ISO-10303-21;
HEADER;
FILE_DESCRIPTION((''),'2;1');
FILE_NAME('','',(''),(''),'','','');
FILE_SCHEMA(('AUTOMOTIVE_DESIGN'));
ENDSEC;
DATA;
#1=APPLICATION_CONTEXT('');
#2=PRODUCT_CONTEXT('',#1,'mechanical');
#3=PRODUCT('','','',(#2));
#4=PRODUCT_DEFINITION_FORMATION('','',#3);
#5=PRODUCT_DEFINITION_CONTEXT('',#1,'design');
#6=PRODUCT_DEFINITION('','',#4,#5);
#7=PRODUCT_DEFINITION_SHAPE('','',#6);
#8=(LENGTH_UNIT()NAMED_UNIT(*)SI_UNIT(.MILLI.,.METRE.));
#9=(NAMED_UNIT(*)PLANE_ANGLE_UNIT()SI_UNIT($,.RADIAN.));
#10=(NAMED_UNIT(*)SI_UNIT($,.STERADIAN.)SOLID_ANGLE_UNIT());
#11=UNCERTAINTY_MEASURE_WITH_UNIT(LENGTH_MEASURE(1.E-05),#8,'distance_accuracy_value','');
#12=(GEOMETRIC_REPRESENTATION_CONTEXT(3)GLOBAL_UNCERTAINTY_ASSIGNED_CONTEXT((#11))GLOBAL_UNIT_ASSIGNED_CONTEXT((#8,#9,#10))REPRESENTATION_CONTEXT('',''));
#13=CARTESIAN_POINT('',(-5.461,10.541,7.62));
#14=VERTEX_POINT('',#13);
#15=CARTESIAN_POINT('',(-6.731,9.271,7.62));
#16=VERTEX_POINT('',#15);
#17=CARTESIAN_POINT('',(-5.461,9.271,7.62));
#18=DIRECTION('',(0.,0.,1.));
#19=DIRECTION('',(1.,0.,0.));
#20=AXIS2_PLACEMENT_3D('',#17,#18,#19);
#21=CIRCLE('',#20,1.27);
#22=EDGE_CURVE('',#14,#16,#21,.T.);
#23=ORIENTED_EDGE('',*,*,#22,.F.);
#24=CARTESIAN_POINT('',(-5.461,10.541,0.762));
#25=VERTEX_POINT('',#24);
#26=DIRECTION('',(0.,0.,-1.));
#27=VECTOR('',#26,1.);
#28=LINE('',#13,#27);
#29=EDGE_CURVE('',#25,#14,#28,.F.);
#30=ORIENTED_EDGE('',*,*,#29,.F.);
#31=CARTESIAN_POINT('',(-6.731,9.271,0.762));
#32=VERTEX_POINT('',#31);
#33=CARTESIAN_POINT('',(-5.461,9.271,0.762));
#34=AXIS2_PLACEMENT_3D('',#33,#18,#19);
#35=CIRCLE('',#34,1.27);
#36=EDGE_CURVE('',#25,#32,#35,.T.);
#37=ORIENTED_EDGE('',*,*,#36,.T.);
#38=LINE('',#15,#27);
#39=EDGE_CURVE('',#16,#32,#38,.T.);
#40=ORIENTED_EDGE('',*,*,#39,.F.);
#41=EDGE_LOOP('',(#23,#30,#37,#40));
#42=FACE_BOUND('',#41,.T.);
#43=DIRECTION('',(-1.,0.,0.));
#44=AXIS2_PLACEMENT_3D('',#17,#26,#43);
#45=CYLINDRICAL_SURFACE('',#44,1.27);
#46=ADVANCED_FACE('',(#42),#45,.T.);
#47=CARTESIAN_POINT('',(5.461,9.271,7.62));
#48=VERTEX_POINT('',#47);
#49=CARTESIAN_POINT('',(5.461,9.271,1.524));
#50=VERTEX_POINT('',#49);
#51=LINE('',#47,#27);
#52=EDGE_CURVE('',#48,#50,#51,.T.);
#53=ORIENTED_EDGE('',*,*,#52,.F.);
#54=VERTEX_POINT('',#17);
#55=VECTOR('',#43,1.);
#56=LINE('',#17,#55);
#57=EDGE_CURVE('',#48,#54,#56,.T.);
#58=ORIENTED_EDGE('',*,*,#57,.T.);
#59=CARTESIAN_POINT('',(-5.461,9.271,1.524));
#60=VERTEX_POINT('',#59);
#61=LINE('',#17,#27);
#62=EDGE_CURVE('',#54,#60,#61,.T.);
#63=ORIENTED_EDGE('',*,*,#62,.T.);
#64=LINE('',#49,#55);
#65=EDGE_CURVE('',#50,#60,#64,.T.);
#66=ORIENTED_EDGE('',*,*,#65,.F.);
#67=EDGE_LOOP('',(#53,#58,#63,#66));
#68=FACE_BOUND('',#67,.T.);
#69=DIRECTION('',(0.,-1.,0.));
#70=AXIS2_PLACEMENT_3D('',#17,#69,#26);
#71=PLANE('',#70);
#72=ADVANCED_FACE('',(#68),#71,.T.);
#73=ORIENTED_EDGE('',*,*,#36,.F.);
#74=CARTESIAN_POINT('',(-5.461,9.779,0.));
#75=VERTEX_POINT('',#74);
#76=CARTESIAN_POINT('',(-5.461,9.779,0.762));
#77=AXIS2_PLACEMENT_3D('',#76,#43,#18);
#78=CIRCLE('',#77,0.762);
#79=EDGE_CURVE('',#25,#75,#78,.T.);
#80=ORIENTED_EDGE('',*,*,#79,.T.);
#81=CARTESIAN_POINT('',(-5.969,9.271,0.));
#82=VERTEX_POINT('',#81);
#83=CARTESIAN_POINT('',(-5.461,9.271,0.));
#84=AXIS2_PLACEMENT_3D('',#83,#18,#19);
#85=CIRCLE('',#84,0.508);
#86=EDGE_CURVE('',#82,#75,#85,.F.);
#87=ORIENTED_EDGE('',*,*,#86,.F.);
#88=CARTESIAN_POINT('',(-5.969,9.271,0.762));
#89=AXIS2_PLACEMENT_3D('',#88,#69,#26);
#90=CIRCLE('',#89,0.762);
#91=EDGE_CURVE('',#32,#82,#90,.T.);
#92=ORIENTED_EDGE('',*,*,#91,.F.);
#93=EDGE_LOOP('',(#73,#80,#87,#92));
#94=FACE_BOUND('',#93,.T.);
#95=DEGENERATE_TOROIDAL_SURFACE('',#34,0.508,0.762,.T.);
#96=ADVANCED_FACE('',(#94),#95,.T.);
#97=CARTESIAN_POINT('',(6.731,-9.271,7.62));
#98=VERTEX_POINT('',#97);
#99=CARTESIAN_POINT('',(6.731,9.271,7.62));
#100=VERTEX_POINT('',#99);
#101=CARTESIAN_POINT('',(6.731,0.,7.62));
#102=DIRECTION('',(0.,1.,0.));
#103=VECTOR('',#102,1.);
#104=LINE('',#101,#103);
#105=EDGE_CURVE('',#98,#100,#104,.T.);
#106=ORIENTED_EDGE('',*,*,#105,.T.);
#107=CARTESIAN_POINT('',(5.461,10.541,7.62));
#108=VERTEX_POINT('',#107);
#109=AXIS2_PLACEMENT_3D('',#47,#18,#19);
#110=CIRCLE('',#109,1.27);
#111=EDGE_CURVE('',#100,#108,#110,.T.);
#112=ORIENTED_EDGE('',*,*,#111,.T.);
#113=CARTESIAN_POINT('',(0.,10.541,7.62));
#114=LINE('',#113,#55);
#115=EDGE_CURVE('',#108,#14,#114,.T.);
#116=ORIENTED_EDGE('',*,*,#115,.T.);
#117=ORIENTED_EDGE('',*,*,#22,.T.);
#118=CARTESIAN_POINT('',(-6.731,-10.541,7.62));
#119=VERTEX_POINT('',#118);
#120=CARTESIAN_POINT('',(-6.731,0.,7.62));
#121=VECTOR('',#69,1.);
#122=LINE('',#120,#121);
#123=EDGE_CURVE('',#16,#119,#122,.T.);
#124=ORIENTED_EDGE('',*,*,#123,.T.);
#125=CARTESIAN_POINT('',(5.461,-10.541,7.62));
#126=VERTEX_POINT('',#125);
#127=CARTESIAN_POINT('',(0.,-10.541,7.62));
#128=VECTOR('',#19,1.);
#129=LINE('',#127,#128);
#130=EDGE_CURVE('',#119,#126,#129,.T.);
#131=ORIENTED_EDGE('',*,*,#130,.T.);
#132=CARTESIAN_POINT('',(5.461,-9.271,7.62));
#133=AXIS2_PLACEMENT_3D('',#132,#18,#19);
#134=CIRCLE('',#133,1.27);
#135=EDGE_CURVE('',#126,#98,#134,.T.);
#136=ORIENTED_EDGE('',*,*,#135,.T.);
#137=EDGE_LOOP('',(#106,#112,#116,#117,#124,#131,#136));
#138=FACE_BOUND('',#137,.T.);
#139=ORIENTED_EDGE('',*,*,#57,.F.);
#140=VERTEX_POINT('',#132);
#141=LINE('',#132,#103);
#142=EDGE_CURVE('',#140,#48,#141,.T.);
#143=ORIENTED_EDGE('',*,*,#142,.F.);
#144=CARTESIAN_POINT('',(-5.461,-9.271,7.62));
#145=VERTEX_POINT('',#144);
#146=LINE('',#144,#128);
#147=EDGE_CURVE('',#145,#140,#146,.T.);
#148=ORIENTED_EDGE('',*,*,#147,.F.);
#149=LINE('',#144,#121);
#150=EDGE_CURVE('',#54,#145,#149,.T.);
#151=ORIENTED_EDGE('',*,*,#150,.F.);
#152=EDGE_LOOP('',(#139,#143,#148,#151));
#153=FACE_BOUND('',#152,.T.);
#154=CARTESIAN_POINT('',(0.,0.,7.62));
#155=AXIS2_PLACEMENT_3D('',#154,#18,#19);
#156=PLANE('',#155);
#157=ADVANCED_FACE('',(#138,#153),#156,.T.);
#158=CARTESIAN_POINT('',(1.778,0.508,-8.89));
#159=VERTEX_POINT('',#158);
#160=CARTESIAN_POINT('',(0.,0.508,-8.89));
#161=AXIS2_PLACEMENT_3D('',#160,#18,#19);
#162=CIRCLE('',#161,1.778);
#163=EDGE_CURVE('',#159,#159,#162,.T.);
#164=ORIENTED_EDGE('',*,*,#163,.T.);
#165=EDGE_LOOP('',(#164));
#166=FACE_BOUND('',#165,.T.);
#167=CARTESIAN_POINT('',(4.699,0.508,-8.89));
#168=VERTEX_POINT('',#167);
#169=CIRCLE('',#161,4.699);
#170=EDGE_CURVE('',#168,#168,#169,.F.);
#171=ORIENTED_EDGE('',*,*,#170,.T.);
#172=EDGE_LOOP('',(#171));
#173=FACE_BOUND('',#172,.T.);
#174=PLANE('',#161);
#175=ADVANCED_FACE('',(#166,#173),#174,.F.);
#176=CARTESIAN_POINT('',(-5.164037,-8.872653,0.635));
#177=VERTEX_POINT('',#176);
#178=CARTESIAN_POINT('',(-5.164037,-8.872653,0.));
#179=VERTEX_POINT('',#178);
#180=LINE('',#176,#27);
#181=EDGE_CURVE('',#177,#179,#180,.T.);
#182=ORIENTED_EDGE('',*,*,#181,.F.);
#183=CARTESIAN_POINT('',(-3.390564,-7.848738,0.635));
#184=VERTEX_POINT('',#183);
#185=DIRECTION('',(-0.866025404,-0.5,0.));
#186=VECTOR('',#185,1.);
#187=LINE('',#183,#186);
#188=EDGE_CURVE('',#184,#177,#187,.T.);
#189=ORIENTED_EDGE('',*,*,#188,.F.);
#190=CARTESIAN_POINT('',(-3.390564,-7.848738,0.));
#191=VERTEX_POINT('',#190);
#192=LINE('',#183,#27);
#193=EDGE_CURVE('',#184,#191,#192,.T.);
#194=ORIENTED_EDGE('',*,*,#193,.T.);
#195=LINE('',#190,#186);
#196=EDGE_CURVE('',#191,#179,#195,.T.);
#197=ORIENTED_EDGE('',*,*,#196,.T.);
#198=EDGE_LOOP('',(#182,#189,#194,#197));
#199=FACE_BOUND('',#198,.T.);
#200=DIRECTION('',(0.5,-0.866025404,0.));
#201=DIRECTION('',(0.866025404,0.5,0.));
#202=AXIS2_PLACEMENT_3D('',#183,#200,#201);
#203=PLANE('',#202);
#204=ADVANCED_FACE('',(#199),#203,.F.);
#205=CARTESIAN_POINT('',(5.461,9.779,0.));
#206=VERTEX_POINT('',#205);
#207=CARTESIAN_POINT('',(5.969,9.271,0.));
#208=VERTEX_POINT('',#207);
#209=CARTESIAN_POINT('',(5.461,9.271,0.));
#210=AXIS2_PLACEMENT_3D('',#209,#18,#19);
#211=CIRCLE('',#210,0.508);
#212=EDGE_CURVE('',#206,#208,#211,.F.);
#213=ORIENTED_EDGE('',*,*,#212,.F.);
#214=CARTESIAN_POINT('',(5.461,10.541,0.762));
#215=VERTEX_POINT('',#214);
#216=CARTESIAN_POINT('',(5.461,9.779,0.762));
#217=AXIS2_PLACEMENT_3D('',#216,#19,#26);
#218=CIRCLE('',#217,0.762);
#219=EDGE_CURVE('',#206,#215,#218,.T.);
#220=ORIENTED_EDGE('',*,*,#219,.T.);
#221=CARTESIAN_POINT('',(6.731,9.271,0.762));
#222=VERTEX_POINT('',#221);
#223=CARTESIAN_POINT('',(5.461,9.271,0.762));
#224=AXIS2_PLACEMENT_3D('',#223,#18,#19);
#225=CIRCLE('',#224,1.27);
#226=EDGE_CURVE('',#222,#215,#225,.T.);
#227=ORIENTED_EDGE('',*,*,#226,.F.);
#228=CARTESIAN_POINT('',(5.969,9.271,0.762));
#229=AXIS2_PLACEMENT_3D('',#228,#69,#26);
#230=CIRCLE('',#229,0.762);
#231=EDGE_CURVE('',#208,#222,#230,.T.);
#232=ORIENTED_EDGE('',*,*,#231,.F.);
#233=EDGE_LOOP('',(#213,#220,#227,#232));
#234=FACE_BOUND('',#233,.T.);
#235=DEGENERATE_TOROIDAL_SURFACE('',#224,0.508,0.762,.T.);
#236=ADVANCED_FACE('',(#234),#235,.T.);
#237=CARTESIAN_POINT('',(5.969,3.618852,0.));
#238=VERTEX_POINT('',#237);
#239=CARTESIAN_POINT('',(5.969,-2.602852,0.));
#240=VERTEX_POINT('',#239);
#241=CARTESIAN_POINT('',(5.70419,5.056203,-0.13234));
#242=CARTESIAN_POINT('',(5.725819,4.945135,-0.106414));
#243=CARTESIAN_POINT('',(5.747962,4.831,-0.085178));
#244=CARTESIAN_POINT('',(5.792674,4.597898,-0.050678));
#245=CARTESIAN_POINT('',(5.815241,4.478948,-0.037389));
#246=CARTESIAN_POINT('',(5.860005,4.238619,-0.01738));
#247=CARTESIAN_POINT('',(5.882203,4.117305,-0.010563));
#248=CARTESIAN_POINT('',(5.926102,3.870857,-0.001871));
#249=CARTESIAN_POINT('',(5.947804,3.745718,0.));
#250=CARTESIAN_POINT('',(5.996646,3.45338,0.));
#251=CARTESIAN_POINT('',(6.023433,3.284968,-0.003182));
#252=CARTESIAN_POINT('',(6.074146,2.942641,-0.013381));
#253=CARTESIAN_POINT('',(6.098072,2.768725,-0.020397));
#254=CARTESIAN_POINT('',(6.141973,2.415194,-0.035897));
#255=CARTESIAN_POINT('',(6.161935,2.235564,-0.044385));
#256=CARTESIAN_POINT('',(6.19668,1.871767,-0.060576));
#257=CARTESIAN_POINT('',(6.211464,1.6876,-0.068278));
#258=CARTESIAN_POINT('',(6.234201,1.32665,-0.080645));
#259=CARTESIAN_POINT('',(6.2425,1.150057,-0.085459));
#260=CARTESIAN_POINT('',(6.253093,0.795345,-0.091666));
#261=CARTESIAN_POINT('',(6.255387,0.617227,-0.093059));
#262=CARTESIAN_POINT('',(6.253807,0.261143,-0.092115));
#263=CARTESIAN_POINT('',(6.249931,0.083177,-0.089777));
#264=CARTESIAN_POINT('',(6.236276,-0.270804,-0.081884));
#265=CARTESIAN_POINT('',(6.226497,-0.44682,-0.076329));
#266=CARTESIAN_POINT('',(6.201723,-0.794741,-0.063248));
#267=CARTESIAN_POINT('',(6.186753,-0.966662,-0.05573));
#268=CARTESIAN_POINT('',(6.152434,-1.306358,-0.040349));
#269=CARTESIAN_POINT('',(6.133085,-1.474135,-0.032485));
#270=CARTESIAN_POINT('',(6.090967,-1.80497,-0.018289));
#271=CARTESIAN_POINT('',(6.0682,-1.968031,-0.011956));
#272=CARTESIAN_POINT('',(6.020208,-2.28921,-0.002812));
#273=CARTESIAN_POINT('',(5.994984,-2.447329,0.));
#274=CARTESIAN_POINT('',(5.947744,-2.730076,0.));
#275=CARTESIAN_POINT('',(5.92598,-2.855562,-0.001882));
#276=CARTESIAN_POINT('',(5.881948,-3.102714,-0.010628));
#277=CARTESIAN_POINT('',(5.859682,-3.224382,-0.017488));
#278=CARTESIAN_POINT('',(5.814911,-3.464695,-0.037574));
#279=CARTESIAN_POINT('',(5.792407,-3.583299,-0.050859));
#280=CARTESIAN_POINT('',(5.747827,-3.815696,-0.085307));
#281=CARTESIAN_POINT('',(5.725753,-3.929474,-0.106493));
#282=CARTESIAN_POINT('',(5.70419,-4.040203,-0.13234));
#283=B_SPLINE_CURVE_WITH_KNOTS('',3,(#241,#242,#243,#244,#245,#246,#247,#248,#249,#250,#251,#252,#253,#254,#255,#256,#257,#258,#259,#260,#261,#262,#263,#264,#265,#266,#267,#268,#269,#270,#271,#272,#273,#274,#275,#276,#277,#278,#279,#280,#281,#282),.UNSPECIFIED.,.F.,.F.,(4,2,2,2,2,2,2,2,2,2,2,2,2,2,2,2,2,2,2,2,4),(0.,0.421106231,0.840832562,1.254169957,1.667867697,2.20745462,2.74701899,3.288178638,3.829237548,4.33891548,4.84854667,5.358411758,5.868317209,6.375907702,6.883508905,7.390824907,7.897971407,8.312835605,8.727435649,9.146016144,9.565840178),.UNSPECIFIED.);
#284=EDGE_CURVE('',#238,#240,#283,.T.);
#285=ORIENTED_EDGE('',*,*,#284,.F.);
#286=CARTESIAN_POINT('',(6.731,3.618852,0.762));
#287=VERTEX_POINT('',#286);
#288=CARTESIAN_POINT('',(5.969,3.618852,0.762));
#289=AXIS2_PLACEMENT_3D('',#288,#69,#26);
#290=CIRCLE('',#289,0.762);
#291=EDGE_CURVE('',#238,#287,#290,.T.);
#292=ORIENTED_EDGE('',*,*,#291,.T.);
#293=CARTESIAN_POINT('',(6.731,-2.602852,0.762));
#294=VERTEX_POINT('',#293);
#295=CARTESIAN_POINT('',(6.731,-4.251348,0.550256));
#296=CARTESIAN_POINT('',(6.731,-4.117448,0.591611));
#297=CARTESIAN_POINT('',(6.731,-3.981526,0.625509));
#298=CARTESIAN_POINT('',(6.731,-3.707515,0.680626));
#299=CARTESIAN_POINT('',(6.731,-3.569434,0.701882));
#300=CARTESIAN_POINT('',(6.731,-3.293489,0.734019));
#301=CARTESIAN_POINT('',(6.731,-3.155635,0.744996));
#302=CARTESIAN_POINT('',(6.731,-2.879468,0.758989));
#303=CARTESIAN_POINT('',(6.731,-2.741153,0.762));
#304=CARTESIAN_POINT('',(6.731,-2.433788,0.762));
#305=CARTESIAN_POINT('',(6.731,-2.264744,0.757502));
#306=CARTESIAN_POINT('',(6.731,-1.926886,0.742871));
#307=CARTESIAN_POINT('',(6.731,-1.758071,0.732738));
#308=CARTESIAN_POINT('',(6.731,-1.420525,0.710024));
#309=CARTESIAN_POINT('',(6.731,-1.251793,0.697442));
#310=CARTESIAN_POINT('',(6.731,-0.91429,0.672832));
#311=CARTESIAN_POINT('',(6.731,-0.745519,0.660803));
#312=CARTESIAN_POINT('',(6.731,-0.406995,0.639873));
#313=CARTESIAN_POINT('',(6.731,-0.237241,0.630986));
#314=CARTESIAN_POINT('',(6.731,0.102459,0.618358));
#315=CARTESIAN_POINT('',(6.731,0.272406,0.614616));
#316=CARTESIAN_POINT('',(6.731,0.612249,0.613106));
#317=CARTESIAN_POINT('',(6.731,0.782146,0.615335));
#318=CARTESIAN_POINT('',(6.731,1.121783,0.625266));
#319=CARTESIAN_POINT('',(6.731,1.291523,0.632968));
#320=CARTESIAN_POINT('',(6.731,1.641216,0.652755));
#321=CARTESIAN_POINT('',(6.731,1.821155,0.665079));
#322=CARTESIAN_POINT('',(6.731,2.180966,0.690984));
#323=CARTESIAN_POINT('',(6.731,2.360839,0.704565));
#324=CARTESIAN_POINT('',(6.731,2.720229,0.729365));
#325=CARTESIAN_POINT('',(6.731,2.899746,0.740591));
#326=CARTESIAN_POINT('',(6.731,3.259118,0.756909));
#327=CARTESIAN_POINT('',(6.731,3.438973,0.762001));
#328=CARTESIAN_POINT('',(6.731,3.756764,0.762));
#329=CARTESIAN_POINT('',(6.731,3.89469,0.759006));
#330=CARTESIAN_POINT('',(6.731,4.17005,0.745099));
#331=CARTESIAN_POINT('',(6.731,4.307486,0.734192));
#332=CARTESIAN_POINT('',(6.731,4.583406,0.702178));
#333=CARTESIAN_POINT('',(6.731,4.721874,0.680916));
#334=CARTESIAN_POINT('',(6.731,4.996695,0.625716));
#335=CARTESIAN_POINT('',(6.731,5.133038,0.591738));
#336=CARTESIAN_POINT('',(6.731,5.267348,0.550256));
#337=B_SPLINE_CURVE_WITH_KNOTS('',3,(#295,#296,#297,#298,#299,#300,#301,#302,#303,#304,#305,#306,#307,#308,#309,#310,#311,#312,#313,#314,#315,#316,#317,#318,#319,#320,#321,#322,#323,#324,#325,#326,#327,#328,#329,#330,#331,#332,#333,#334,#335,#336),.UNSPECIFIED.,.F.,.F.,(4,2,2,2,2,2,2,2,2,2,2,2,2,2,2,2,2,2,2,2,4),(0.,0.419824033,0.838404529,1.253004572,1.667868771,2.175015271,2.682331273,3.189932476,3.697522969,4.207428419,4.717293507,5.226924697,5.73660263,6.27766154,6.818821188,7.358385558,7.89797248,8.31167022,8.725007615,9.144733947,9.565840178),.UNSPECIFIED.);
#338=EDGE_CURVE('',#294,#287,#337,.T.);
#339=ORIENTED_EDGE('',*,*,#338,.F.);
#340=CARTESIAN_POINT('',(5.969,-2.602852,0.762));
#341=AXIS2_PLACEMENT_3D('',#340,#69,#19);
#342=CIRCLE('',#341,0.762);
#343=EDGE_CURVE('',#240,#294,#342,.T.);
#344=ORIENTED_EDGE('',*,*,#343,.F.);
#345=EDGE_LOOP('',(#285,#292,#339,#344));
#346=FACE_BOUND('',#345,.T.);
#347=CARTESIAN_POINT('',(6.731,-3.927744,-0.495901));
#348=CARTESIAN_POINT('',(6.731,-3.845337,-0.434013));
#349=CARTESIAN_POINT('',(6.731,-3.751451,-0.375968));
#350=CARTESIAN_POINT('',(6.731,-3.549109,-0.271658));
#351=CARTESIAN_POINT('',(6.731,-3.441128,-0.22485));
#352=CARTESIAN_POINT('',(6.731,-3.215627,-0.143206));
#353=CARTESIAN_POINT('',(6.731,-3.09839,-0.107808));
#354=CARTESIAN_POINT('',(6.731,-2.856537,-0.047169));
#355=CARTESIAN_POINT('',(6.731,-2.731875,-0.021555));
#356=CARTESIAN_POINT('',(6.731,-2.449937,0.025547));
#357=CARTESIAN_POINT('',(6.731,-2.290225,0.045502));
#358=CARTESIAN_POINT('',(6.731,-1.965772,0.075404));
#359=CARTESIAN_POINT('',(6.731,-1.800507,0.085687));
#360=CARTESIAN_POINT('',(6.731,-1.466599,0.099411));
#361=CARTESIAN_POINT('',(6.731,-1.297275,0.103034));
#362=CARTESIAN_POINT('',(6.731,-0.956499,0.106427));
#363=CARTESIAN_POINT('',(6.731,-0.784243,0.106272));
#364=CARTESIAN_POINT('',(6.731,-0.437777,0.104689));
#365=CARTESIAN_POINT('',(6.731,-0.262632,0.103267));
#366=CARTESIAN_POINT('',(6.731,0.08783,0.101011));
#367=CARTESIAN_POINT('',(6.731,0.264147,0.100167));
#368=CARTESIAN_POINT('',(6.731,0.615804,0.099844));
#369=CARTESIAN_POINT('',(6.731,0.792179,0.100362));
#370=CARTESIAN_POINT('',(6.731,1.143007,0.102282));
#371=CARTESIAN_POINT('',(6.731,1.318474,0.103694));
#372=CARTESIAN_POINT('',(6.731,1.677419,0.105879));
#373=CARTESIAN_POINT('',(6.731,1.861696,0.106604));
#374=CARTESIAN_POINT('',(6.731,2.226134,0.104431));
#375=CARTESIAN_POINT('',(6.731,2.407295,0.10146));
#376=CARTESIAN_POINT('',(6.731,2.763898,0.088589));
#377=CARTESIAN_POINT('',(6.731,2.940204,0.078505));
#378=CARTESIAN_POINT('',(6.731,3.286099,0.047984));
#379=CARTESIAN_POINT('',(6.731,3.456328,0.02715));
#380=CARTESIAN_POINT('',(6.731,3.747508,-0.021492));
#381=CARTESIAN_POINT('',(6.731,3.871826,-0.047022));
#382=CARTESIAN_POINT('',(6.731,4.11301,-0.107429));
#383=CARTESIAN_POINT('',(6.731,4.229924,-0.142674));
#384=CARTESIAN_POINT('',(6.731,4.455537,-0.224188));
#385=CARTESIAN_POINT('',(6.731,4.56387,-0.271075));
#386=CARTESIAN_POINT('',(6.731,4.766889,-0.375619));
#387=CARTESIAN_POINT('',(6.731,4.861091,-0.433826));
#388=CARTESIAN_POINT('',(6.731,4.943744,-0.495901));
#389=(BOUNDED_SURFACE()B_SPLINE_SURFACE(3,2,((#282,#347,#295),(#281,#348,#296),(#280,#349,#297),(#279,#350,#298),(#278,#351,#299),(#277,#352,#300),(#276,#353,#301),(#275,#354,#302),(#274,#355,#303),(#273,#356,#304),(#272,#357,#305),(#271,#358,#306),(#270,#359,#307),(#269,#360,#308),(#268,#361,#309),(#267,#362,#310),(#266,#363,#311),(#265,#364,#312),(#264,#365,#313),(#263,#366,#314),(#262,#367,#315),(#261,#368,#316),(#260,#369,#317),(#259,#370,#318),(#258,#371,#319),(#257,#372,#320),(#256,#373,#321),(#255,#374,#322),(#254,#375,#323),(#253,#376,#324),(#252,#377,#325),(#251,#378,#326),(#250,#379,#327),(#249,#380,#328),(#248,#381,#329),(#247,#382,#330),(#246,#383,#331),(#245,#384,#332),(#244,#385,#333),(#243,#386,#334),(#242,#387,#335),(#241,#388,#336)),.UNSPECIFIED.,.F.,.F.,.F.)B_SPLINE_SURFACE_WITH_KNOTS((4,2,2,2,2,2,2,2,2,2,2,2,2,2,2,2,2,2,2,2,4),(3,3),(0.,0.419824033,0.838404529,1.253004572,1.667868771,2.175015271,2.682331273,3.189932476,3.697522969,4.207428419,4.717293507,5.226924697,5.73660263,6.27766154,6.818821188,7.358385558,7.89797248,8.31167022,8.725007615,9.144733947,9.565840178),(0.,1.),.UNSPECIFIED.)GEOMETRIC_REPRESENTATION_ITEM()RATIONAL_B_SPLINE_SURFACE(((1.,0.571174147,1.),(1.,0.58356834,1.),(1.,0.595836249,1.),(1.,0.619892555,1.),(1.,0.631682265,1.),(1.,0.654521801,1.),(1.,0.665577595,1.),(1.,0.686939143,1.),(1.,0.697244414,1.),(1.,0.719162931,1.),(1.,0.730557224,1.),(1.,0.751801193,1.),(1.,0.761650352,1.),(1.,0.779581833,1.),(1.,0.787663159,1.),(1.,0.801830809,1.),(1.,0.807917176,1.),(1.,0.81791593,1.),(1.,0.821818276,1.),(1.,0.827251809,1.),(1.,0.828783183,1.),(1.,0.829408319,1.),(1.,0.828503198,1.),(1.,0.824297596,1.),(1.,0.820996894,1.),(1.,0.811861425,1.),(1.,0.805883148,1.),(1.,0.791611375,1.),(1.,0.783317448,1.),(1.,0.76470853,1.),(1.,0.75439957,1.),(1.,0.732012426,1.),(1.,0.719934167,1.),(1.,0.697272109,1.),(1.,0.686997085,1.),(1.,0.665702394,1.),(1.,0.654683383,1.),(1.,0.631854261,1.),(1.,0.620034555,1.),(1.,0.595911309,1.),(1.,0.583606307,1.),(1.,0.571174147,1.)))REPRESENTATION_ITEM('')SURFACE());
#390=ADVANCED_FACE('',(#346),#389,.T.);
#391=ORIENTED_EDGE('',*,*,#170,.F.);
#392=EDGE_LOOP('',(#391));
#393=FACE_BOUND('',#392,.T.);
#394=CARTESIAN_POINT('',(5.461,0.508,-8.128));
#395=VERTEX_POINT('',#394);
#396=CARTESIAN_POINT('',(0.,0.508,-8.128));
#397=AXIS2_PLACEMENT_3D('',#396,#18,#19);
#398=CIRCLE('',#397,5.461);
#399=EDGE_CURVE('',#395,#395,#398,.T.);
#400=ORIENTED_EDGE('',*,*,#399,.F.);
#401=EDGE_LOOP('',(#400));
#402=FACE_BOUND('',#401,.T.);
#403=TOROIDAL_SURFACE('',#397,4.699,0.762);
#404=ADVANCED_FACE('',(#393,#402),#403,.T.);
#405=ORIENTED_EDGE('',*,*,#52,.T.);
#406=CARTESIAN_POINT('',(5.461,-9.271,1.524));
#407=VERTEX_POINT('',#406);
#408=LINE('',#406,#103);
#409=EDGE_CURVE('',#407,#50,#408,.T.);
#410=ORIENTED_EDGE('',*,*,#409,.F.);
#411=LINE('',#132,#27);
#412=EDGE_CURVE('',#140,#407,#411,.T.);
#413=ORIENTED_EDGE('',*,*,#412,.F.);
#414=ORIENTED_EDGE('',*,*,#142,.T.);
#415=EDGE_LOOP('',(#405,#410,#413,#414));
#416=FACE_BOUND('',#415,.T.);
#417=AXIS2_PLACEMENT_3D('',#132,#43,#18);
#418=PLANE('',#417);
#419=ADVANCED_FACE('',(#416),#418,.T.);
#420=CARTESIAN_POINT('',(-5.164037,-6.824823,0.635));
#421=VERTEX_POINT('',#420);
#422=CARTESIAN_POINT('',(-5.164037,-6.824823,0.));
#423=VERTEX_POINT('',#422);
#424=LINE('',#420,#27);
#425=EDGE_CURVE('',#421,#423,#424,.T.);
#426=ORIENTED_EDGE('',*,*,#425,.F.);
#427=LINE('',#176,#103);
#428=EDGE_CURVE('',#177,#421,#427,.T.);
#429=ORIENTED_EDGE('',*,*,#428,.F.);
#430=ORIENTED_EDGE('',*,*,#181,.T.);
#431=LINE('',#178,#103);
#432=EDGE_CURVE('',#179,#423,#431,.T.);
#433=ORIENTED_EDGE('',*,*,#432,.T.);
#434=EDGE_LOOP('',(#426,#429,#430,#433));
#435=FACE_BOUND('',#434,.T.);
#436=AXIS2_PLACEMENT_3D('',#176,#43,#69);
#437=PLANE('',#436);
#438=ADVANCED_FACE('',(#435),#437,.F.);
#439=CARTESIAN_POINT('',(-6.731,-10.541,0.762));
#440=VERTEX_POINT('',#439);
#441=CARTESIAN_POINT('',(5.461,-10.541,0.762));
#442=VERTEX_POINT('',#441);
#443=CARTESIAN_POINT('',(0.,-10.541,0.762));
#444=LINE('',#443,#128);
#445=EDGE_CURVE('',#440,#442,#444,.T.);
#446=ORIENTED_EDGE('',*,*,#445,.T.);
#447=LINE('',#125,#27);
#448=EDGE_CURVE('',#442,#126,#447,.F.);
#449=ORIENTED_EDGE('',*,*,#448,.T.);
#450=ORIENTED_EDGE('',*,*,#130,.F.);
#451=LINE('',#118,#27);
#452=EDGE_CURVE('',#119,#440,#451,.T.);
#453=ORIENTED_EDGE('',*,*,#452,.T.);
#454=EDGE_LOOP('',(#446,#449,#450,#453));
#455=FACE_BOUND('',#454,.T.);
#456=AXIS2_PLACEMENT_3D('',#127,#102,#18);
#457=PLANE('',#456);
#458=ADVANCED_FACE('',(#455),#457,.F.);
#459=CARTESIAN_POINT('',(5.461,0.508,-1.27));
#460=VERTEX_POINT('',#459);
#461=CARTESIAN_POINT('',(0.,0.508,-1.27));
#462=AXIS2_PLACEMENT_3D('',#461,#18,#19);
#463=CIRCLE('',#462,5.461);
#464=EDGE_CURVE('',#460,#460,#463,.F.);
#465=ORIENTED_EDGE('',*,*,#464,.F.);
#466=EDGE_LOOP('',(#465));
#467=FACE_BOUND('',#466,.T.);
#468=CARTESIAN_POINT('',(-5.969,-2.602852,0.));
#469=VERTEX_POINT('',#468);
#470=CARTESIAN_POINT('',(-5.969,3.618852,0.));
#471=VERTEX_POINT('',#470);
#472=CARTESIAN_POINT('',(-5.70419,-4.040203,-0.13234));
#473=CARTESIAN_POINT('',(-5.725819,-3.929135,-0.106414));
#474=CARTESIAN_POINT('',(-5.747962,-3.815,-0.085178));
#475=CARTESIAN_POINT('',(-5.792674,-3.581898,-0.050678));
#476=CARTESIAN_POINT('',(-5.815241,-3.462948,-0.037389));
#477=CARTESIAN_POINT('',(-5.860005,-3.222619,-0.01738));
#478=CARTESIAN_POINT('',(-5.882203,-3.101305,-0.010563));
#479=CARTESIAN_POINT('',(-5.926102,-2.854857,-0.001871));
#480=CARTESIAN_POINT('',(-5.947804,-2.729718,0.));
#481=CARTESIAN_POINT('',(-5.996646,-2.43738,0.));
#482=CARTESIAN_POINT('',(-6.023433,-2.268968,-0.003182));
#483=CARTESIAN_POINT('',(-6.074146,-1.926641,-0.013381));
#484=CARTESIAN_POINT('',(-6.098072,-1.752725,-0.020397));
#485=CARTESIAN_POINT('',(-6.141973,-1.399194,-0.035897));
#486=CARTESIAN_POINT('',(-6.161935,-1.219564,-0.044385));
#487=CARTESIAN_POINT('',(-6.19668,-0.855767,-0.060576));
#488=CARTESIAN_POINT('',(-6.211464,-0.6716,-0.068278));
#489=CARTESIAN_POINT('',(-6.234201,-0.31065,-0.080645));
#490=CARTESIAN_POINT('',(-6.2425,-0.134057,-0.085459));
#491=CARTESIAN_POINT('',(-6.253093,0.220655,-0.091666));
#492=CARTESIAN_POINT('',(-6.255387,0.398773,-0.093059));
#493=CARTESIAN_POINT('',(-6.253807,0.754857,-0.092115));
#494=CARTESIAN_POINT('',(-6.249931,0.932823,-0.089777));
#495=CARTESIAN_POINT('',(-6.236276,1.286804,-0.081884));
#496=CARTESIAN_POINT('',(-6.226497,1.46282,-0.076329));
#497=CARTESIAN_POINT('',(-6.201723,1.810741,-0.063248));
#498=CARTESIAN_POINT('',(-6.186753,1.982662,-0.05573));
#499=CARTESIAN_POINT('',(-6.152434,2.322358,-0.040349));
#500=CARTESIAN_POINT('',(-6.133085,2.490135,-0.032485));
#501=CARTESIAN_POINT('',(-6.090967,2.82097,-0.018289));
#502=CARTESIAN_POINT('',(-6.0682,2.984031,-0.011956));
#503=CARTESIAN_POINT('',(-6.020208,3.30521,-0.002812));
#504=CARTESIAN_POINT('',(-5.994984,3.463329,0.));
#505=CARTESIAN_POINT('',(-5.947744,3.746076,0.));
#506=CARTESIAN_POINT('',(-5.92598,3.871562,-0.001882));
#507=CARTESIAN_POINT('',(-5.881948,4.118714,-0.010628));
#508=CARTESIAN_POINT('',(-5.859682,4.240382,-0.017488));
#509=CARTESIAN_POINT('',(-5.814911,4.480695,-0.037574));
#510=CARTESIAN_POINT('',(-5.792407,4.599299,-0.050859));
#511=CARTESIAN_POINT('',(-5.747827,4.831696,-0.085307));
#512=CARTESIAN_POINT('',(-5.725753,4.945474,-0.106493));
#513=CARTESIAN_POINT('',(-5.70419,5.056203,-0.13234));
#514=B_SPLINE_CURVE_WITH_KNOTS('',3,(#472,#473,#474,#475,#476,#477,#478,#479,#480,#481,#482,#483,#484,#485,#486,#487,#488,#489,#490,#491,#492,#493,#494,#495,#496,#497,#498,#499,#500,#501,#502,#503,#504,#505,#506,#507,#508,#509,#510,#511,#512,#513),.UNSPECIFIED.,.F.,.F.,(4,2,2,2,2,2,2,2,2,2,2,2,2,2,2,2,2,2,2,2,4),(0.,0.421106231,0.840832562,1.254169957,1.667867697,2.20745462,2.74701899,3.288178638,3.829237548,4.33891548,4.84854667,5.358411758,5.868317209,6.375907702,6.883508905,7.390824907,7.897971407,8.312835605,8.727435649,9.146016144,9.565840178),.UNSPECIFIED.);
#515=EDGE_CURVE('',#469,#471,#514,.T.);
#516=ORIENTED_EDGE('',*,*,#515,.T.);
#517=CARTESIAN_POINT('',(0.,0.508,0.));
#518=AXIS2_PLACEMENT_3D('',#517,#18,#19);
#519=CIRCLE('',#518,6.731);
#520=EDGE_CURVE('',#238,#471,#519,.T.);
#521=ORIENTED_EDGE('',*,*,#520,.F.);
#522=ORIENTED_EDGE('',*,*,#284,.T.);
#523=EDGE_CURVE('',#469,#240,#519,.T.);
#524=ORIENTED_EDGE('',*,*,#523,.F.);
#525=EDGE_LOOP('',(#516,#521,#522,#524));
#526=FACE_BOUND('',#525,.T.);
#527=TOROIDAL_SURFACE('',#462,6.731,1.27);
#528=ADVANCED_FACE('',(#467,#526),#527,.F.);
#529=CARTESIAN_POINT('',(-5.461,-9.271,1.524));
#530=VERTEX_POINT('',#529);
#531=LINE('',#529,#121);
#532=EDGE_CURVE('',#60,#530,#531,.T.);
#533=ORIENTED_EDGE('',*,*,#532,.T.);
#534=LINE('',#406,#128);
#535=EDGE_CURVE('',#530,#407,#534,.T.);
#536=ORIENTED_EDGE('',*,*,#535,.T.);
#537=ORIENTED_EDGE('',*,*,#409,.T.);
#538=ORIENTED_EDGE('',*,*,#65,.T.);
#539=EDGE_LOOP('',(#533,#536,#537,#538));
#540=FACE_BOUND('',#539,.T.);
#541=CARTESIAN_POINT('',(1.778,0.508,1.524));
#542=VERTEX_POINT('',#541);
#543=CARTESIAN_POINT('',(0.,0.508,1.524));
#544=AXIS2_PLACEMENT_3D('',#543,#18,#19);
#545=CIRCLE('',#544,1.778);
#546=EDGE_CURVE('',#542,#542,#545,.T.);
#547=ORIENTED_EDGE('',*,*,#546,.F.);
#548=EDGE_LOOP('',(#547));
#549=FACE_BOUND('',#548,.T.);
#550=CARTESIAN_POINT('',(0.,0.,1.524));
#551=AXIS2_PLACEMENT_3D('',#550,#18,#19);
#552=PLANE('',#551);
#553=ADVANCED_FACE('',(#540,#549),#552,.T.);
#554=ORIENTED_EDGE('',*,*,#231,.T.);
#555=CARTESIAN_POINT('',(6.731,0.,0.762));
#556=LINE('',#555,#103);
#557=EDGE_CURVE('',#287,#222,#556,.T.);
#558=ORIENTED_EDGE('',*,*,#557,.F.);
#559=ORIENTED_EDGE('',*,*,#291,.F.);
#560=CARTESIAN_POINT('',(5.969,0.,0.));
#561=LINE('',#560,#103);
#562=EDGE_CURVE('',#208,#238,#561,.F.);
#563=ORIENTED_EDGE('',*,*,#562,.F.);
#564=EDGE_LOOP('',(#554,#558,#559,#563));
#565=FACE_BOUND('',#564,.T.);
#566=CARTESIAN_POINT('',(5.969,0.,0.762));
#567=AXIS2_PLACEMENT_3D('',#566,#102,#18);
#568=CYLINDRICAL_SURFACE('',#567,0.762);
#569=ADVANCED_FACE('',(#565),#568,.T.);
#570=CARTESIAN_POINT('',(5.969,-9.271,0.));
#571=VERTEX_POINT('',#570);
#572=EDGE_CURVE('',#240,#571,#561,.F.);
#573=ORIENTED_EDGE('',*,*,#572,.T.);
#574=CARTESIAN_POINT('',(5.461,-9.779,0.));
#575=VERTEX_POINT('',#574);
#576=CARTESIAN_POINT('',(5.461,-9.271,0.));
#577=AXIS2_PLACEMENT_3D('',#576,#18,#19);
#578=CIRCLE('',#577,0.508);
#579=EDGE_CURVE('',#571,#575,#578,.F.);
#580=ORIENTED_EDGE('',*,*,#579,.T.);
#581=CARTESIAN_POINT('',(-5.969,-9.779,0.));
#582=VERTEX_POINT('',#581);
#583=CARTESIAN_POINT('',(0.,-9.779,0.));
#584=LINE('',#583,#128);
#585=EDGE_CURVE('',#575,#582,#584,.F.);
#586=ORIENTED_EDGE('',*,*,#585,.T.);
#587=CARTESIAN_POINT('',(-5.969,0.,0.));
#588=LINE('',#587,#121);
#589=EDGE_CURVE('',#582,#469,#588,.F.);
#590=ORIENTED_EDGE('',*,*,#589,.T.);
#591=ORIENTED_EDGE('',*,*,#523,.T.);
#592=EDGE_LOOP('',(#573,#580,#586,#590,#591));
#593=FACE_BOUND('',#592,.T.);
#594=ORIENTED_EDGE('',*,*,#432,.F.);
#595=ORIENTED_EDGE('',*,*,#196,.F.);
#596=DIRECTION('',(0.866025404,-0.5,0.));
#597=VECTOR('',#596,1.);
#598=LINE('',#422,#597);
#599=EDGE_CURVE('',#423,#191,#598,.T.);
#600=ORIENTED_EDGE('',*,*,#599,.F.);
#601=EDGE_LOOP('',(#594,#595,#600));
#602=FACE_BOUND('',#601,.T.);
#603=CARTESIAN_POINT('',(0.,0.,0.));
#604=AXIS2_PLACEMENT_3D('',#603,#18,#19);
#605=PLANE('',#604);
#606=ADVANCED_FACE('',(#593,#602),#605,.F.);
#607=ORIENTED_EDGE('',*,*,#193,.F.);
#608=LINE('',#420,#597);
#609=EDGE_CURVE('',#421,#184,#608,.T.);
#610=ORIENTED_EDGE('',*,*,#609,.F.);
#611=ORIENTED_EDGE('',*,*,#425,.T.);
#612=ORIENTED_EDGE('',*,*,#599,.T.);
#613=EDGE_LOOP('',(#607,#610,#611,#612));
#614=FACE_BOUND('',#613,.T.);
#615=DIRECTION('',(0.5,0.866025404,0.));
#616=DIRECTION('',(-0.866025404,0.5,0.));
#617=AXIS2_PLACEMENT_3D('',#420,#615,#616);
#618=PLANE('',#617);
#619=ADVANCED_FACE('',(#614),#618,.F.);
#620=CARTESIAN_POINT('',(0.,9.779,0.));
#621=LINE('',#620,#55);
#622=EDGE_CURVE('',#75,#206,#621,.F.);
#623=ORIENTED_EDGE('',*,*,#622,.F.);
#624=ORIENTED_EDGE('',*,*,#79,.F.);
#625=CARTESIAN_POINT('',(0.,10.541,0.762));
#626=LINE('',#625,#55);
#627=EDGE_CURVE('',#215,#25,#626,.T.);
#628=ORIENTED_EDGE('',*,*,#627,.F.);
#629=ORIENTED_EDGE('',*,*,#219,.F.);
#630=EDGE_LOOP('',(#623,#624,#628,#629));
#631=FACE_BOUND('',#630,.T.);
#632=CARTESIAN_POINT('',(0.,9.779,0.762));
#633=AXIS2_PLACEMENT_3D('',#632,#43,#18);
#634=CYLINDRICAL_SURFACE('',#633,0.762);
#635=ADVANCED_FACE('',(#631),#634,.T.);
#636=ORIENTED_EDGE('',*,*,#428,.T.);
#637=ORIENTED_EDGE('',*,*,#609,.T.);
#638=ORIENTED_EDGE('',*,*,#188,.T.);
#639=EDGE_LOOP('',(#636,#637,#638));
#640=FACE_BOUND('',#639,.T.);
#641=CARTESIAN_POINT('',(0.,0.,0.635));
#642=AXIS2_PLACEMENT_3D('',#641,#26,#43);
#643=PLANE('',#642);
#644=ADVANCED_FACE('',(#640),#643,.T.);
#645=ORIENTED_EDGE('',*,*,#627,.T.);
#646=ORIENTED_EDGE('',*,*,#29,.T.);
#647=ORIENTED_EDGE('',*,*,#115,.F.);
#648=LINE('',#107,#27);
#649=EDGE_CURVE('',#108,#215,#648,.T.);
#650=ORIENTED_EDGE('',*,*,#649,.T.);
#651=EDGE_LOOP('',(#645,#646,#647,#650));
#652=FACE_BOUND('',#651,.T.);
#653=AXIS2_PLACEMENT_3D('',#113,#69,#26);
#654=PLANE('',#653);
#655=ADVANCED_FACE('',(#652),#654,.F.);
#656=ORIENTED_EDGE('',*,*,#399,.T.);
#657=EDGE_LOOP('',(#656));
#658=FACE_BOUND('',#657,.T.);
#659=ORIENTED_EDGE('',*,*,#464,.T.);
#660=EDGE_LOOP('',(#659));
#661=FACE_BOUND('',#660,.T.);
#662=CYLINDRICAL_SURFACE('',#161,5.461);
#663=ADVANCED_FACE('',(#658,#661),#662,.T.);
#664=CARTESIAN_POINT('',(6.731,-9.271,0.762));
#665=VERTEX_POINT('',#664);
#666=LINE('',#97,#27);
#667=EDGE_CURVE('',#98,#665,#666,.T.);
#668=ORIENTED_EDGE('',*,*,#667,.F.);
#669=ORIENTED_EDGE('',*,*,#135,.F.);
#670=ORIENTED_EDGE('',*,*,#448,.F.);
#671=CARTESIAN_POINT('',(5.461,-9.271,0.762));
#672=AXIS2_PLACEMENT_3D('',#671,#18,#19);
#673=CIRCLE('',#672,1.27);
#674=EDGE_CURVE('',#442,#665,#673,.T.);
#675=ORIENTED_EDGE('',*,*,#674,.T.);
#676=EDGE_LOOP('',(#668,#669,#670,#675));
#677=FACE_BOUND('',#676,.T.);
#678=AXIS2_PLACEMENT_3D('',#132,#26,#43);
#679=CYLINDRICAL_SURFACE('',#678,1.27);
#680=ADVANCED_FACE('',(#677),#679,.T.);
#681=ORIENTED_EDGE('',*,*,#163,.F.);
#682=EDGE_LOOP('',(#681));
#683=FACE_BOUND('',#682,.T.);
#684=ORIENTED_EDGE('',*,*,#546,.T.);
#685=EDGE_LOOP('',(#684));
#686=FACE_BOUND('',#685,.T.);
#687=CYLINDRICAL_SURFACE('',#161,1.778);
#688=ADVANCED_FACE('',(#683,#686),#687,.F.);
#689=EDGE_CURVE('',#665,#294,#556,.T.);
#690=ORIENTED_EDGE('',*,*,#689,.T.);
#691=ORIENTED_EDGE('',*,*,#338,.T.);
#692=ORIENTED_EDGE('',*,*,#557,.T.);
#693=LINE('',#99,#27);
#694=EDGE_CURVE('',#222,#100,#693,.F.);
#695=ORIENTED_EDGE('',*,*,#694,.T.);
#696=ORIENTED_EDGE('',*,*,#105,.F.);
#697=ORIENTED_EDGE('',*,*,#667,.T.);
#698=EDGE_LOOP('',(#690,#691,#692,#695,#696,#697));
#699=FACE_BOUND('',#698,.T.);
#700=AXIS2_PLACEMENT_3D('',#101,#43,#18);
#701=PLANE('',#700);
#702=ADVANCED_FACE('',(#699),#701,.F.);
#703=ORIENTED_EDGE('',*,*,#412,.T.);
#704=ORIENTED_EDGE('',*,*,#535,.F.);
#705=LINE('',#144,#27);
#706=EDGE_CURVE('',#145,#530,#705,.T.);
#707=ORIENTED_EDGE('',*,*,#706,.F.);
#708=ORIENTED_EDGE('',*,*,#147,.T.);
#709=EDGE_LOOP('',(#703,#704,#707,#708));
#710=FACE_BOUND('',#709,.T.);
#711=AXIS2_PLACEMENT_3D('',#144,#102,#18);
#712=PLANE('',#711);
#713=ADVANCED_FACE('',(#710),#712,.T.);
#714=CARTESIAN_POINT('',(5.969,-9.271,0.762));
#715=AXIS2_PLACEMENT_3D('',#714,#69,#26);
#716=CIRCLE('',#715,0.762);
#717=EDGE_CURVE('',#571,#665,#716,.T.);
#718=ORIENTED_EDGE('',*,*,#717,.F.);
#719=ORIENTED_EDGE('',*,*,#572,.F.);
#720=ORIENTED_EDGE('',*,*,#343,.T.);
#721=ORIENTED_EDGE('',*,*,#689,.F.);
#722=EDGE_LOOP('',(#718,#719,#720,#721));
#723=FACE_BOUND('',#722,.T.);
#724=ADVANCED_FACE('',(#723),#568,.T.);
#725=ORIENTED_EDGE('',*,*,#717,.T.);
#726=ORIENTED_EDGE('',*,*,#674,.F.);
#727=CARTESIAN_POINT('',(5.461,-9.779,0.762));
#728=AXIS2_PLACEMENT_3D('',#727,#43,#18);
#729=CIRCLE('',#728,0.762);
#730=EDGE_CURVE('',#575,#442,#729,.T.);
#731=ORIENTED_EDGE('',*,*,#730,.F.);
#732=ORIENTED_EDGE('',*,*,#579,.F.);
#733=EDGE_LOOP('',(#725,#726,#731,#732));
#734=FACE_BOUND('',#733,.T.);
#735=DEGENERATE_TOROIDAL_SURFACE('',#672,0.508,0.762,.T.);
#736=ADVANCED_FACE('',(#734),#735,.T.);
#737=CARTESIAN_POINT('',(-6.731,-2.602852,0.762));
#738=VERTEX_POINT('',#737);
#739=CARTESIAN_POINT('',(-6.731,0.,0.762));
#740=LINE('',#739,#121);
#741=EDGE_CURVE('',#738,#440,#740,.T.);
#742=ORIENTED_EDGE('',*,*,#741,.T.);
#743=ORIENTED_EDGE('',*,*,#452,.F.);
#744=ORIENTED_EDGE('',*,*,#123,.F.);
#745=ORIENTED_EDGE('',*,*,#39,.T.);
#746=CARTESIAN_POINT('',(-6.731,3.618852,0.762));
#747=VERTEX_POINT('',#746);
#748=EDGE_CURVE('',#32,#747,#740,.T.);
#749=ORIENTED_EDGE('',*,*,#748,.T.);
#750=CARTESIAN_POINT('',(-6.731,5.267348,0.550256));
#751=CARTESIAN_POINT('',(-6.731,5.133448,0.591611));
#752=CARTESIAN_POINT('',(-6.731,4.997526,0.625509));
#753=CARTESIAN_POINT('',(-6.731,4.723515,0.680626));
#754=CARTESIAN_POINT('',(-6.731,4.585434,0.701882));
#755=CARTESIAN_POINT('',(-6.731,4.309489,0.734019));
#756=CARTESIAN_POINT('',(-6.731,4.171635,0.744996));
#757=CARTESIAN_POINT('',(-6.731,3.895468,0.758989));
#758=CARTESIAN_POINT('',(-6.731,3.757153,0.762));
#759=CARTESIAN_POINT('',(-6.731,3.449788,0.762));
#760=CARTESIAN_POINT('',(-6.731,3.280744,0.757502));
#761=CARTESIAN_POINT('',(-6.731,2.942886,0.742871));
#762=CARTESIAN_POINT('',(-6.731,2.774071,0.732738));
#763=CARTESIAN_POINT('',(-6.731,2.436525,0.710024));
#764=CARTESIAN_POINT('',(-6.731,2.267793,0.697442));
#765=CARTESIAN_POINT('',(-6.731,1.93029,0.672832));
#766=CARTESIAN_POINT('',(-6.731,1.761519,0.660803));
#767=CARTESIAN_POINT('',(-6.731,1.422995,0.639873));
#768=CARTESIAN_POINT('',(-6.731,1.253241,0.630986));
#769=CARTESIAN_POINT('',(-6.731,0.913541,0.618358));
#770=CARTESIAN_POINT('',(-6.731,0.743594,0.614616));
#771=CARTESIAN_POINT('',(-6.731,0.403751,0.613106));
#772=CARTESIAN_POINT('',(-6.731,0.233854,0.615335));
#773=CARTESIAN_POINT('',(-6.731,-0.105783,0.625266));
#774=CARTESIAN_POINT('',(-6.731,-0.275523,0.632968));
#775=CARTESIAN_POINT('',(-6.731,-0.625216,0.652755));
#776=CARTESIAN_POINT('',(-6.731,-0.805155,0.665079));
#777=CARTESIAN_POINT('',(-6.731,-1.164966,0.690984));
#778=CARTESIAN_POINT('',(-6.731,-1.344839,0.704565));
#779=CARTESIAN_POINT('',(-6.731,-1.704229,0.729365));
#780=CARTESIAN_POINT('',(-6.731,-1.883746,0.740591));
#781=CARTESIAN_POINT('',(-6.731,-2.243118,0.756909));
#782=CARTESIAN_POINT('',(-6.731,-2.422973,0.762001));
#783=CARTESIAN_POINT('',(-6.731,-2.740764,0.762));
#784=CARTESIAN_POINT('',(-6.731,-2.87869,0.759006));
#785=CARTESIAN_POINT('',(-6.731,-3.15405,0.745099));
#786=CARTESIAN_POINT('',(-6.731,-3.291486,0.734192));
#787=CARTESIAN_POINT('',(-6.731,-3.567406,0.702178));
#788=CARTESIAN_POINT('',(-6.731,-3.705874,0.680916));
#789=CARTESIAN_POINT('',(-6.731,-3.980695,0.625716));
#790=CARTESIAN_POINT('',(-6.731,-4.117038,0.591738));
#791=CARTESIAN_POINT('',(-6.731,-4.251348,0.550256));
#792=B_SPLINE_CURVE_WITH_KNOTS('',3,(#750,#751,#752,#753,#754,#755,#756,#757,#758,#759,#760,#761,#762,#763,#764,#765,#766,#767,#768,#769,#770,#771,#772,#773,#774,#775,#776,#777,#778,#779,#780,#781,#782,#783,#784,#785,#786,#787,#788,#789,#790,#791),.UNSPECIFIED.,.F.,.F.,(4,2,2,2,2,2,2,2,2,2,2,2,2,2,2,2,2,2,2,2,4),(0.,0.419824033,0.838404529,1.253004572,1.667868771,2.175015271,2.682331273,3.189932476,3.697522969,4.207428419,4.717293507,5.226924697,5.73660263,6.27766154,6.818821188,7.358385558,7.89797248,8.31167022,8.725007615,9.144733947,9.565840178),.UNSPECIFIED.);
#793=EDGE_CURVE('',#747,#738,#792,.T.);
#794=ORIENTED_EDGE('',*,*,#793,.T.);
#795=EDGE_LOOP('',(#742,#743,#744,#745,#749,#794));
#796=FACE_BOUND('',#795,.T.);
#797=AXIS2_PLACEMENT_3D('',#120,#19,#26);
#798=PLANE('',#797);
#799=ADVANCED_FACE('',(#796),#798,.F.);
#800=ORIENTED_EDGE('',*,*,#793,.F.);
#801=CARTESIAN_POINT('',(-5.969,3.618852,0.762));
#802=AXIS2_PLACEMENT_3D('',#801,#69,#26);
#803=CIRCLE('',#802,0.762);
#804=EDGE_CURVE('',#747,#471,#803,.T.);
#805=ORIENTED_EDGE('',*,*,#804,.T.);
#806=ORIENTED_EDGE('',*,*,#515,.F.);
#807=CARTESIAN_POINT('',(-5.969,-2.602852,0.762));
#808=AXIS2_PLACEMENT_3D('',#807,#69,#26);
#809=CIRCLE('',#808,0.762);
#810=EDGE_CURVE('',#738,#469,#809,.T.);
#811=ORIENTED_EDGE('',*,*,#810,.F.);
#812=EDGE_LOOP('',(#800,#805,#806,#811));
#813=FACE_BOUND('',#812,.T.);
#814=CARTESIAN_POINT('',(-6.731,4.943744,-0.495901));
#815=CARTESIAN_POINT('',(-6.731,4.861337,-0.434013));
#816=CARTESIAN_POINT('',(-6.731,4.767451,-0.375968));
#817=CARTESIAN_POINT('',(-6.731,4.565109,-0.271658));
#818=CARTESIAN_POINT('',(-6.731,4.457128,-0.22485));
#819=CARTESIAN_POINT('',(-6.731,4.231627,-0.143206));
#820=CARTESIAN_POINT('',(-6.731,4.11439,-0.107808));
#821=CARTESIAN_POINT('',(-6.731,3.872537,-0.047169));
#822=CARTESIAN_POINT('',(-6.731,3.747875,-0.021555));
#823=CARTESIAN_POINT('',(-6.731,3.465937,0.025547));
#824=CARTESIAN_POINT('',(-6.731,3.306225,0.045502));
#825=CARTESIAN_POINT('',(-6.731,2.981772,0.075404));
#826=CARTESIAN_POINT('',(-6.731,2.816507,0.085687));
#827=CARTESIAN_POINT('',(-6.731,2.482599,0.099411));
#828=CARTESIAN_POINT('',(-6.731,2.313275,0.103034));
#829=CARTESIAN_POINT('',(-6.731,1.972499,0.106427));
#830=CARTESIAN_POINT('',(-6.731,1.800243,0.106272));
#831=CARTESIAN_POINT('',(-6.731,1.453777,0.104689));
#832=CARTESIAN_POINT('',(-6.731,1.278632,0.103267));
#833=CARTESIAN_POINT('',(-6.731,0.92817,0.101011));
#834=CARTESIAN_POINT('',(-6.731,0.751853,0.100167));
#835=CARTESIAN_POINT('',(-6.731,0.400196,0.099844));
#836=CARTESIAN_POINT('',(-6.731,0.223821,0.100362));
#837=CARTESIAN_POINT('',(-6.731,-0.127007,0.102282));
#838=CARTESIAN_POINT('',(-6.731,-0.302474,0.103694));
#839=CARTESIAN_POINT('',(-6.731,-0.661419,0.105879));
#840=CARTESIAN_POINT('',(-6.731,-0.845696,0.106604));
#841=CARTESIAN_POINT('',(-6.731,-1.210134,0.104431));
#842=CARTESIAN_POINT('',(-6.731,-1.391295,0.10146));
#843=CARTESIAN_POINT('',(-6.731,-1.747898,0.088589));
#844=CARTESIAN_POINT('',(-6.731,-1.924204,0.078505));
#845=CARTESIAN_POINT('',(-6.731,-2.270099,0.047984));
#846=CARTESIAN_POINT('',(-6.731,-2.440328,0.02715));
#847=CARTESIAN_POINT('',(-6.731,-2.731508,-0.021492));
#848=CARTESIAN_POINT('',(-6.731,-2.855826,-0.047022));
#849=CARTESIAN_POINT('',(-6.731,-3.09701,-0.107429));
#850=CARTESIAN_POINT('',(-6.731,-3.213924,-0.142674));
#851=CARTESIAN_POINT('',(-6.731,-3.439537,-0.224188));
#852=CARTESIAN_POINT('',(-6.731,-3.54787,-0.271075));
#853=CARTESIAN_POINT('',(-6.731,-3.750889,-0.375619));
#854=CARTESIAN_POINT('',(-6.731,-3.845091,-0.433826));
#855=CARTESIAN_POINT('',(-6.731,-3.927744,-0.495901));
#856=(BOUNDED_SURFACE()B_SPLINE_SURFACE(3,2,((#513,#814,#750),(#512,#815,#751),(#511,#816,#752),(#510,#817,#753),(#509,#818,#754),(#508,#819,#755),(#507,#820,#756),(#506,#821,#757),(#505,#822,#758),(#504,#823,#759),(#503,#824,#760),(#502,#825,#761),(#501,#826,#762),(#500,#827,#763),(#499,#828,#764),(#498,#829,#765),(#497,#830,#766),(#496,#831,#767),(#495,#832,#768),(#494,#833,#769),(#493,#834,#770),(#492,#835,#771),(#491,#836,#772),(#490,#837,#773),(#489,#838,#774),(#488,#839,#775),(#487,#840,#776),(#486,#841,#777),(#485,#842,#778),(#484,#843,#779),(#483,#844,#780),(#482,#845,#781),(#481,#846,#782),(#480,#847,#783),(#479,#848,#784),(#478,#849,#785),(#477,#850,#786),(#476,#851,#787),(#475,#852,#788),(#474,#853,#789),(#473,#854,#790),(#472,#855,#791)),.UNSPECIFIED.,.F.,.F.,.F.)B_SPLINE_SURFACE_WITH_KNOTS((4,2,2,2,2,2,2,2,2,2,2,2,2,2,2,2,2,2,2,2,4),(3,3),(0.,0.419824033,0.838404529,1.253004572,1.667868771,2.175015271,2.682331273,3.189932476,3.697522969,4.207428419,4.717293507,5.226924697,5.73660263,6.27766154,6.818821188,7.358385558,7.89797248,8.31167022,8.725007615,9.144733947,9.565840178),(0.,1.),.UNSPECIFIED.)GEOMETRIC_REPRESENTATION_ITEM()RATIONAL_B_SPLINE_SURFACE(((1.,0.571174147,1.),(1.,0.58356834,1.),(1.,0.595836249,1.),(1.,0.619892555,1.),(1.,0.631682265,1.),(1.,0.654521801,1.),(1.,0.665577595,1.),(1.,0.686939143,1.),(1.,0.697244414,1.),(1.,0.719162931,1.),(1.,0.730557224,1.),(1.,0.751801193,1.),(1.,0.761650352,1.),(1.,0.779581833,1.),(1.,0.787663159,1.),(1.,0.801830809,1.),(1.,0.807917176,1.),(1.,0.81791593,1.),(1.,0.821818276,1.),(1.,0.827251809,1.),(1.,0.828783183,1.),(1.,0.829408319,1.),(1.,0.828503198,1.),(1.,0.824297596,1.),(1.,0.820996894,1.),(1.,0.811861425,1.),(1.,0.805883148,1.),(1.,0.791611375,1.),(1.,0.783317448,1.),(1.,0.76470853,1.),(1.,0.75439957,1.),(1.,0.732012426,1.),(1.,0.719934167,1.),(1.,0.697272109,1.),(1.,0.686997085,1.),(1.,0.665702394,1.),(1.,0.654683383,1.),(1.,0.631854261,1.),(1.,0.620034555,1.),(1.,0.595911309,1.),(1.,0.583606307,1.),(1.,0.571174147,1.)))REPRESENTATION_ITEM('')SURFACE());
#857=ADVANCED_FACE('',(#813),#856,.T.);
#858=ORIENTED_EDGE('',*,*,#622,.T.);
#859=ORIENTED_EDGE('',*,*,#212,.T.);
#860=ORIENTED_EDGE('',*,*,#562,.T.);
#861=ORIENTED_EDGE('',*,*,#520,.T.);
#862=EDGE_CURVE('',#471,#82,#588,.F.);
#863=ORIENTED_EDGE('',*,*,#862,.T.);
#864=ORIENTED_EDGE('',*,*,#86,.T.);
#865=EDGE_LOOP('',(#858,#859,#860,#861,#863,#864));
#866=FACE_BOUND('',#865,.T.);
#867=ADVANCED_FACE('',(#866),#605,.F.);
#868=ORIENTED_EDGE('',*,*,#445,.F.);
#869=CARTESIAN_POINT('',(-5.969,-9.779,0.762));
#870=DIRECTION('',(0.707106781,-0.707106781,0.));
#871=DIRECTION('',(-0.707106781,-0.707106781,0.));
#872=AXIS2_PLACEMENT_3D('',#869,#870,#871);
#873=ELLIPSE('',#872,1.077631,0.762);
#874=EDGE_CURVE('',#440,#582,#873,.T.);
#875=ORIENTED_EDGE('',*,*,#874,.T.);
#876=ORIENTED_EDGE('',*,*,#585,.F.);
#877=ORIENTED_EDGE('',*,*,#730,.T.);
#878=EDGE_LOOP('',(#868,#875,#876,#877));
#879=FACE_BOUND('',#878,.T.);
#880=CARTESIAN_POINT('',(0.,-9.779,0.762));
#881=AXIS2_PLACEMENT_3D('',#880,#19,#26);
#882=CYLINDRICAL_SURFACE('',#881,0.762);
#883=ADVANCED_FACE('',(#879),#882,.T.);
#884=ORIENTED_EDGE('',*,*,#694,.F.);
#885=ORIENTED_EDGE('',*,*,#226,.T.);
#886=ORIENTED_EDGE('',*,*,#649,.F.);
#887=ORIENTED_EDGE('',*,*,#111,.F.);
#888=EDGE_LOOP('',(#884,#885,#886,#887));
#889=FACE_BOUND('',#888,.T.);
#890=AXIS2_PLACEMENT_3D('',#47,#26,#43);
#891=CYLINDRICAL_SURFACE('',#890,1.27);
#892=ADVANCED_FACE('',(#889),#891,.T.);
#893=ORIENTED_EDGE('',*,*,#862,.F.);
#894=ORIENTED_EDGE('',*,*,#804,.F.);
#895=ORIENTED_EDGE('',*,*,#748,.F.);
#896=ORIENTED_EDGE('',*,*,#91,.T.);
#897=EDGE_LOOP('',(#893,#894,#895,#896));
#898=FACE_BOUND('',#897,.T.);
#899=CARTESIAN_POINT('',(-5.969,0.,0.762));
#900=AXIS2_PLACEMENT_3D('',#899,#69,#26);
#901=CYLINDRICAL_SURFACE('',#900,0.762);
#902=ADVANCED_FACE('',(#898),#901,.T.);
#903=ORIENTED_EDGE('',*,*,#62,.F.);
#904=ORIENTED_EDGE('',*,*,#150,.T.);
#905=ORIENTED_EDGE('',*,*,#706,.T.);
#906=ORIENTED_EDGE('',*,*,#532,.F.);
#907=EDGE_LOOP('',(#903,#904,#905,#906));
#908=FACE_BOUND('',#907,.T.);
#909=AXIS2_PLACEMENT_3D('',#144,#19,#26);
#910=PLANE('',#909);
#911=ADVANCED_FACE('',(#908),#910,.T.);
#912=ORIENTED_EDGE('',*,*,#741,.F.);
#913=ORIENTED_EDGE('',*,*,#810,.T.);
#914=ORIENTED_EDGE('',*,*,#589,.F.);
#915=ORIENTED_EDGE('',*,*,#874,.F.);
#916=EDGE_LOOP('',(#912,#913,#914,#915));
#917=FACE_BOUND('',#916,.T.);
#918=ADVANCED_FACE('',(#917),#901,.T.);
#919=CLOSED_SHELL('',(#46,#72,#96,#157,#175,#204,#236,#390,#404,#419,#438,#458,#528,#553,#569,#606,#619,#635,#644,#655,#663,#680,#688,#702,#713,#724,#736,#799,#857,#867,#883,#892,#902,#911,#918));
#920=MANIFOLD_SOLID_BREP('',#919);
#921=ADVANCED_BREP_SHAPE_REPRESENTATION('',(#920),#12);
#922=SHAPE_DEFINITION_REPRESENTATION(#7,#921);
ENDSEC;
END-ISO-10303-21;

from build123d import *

# Parameters (mm, degrees)
SKETCH1_W           = 10.922
SKETCH1_H           = 18.542
BOSS_EXTRUDE1_DEPTH = 1.524
SKETCH3_R           = 5.461
SKETCH3_R_2         = 1.778
BOSS_EXTRUDE2_DEPTH = 8.89
SKETCH2_W           = 13.462
SKETCH2_H           = 21.082
SKETCH2_W_2         = 10.922
SKETCH2_H_2         = 18.542
EXTRUDE_THIN1_DEPTH = 7.62
CUT_EXTRUDE1_START  = -20.32
SKETCH4_R           = 1.778
CUT_EXTRUDE1_DEPTH  = 20.32
FILLET1_R           = 1.27
FILLET2_R           = 0.762
FILLET3_R           = 0.762
CUT_EXTRUDE2_DEPTH  = 0.635


with BuildPart() as part:
    # Sketch1 → Boss-Extrude1 (new body)
    with BuildSketch(Plane.XY):
        Rectangle(SKETCH1_W, SKETCH1_H)
    extrude(amount=BOSS_EXTRUDE1_DEPTH)

    # Sketch3 → Boss-Extrude2 (add)
    with BuildSketch(Plane.XY):
        with Locations((0, 0.508)):
            Circle(SKETCH3_R)
        with Locations((0, 0.508)):
            Circle(SKETCH3_R_2, mode=Mode.SUBTRACT)
    extrude(amount=-BOSS_EXTRUDE2_DEPTH)

    # Sketch2 → Extrude-Thin1 (add)
    with BuildSketch(Plane.XY):
        Rectangle(SKETCH2_W, SKETCH2_H)
        Rectangle(SKETCH2_W_2, SKETCH2_H_2, mode=Mode.SUBTRACT)
    extrude(amount=EXTRUDE_THIN1_DEPTH)

    # Sketch4 → Cut-Extrude1 (cut)
    with BuildSketch(Plane(origin=(0, 0, -8.89), x_dir=(-1, 0, 0), z_dir=(0, 0, -1)).offset(CUT_EXTRUDE1_START)):
        with Locations(Location((0, 0.508, 0), (0, 0, 180))):
            Circle(SKETCH4_R)
    extrude(amount=CUT_EXTRUDE1_DEPTH, mode=Mode.SUBTRACT)

    # Fillet1
    fillet1_edges = [part.edges().sort_by_distance(p)[0] for p in [
        (-5.461, 0.508, 0),
        (6.731, -10.541, 3.81),
        (6.731, 10.541, 3.81),
        (-6.731, 10.541, 3.81),
    ]]
    fillet(fillet1_edges, radius=FILLET1_R - 0.0001)  # a hair under: the kernel refuses the full size

    # Fillet2
    fillet2_edges = [part.edges().sort_by_distance(p)[0] for p in [
        (-5.461, 0.508, -8.89),
    ]]
    fillet(fillet2_edges, radius=FILLET2_R)

    # Fillet3
    fillet3_edges = [part.edges().sort_by_distance(p)[0] for p in [
        (-0.63495, -10.541, 0),
        (6.731, 0, 0),
        (6.731, 0, 0),
        (-6.731, -0.63495, 0),
        (-6.731, -0.63495, 0),
        (0, 10.541, 0),
        (-6.359054901, 10.169054901, 0),
        (6.359054901, 10.169054901, 0),
        (6.359054901, -10.169054901, 0),
    ]]
    fillet(fillet3_edges, radius=FILLET3_R)

    # Sketch5 → Cut-Extrude2 (cut)
    with BuildSketch(Plane(origin=(0, 0, 0), x_dir=(-1, 0, 0), z_dir=(0, 0, -1))):
        Polygon((3.390564192, -7.848738261), (5.164036584, -8.872653024), (5.164036584, -6.824823498), align=None)
    extrude(amount=-CUT_EXTRUDE2_DEPTH, mode=Mode.SUBTRACT)


solid = part.part
